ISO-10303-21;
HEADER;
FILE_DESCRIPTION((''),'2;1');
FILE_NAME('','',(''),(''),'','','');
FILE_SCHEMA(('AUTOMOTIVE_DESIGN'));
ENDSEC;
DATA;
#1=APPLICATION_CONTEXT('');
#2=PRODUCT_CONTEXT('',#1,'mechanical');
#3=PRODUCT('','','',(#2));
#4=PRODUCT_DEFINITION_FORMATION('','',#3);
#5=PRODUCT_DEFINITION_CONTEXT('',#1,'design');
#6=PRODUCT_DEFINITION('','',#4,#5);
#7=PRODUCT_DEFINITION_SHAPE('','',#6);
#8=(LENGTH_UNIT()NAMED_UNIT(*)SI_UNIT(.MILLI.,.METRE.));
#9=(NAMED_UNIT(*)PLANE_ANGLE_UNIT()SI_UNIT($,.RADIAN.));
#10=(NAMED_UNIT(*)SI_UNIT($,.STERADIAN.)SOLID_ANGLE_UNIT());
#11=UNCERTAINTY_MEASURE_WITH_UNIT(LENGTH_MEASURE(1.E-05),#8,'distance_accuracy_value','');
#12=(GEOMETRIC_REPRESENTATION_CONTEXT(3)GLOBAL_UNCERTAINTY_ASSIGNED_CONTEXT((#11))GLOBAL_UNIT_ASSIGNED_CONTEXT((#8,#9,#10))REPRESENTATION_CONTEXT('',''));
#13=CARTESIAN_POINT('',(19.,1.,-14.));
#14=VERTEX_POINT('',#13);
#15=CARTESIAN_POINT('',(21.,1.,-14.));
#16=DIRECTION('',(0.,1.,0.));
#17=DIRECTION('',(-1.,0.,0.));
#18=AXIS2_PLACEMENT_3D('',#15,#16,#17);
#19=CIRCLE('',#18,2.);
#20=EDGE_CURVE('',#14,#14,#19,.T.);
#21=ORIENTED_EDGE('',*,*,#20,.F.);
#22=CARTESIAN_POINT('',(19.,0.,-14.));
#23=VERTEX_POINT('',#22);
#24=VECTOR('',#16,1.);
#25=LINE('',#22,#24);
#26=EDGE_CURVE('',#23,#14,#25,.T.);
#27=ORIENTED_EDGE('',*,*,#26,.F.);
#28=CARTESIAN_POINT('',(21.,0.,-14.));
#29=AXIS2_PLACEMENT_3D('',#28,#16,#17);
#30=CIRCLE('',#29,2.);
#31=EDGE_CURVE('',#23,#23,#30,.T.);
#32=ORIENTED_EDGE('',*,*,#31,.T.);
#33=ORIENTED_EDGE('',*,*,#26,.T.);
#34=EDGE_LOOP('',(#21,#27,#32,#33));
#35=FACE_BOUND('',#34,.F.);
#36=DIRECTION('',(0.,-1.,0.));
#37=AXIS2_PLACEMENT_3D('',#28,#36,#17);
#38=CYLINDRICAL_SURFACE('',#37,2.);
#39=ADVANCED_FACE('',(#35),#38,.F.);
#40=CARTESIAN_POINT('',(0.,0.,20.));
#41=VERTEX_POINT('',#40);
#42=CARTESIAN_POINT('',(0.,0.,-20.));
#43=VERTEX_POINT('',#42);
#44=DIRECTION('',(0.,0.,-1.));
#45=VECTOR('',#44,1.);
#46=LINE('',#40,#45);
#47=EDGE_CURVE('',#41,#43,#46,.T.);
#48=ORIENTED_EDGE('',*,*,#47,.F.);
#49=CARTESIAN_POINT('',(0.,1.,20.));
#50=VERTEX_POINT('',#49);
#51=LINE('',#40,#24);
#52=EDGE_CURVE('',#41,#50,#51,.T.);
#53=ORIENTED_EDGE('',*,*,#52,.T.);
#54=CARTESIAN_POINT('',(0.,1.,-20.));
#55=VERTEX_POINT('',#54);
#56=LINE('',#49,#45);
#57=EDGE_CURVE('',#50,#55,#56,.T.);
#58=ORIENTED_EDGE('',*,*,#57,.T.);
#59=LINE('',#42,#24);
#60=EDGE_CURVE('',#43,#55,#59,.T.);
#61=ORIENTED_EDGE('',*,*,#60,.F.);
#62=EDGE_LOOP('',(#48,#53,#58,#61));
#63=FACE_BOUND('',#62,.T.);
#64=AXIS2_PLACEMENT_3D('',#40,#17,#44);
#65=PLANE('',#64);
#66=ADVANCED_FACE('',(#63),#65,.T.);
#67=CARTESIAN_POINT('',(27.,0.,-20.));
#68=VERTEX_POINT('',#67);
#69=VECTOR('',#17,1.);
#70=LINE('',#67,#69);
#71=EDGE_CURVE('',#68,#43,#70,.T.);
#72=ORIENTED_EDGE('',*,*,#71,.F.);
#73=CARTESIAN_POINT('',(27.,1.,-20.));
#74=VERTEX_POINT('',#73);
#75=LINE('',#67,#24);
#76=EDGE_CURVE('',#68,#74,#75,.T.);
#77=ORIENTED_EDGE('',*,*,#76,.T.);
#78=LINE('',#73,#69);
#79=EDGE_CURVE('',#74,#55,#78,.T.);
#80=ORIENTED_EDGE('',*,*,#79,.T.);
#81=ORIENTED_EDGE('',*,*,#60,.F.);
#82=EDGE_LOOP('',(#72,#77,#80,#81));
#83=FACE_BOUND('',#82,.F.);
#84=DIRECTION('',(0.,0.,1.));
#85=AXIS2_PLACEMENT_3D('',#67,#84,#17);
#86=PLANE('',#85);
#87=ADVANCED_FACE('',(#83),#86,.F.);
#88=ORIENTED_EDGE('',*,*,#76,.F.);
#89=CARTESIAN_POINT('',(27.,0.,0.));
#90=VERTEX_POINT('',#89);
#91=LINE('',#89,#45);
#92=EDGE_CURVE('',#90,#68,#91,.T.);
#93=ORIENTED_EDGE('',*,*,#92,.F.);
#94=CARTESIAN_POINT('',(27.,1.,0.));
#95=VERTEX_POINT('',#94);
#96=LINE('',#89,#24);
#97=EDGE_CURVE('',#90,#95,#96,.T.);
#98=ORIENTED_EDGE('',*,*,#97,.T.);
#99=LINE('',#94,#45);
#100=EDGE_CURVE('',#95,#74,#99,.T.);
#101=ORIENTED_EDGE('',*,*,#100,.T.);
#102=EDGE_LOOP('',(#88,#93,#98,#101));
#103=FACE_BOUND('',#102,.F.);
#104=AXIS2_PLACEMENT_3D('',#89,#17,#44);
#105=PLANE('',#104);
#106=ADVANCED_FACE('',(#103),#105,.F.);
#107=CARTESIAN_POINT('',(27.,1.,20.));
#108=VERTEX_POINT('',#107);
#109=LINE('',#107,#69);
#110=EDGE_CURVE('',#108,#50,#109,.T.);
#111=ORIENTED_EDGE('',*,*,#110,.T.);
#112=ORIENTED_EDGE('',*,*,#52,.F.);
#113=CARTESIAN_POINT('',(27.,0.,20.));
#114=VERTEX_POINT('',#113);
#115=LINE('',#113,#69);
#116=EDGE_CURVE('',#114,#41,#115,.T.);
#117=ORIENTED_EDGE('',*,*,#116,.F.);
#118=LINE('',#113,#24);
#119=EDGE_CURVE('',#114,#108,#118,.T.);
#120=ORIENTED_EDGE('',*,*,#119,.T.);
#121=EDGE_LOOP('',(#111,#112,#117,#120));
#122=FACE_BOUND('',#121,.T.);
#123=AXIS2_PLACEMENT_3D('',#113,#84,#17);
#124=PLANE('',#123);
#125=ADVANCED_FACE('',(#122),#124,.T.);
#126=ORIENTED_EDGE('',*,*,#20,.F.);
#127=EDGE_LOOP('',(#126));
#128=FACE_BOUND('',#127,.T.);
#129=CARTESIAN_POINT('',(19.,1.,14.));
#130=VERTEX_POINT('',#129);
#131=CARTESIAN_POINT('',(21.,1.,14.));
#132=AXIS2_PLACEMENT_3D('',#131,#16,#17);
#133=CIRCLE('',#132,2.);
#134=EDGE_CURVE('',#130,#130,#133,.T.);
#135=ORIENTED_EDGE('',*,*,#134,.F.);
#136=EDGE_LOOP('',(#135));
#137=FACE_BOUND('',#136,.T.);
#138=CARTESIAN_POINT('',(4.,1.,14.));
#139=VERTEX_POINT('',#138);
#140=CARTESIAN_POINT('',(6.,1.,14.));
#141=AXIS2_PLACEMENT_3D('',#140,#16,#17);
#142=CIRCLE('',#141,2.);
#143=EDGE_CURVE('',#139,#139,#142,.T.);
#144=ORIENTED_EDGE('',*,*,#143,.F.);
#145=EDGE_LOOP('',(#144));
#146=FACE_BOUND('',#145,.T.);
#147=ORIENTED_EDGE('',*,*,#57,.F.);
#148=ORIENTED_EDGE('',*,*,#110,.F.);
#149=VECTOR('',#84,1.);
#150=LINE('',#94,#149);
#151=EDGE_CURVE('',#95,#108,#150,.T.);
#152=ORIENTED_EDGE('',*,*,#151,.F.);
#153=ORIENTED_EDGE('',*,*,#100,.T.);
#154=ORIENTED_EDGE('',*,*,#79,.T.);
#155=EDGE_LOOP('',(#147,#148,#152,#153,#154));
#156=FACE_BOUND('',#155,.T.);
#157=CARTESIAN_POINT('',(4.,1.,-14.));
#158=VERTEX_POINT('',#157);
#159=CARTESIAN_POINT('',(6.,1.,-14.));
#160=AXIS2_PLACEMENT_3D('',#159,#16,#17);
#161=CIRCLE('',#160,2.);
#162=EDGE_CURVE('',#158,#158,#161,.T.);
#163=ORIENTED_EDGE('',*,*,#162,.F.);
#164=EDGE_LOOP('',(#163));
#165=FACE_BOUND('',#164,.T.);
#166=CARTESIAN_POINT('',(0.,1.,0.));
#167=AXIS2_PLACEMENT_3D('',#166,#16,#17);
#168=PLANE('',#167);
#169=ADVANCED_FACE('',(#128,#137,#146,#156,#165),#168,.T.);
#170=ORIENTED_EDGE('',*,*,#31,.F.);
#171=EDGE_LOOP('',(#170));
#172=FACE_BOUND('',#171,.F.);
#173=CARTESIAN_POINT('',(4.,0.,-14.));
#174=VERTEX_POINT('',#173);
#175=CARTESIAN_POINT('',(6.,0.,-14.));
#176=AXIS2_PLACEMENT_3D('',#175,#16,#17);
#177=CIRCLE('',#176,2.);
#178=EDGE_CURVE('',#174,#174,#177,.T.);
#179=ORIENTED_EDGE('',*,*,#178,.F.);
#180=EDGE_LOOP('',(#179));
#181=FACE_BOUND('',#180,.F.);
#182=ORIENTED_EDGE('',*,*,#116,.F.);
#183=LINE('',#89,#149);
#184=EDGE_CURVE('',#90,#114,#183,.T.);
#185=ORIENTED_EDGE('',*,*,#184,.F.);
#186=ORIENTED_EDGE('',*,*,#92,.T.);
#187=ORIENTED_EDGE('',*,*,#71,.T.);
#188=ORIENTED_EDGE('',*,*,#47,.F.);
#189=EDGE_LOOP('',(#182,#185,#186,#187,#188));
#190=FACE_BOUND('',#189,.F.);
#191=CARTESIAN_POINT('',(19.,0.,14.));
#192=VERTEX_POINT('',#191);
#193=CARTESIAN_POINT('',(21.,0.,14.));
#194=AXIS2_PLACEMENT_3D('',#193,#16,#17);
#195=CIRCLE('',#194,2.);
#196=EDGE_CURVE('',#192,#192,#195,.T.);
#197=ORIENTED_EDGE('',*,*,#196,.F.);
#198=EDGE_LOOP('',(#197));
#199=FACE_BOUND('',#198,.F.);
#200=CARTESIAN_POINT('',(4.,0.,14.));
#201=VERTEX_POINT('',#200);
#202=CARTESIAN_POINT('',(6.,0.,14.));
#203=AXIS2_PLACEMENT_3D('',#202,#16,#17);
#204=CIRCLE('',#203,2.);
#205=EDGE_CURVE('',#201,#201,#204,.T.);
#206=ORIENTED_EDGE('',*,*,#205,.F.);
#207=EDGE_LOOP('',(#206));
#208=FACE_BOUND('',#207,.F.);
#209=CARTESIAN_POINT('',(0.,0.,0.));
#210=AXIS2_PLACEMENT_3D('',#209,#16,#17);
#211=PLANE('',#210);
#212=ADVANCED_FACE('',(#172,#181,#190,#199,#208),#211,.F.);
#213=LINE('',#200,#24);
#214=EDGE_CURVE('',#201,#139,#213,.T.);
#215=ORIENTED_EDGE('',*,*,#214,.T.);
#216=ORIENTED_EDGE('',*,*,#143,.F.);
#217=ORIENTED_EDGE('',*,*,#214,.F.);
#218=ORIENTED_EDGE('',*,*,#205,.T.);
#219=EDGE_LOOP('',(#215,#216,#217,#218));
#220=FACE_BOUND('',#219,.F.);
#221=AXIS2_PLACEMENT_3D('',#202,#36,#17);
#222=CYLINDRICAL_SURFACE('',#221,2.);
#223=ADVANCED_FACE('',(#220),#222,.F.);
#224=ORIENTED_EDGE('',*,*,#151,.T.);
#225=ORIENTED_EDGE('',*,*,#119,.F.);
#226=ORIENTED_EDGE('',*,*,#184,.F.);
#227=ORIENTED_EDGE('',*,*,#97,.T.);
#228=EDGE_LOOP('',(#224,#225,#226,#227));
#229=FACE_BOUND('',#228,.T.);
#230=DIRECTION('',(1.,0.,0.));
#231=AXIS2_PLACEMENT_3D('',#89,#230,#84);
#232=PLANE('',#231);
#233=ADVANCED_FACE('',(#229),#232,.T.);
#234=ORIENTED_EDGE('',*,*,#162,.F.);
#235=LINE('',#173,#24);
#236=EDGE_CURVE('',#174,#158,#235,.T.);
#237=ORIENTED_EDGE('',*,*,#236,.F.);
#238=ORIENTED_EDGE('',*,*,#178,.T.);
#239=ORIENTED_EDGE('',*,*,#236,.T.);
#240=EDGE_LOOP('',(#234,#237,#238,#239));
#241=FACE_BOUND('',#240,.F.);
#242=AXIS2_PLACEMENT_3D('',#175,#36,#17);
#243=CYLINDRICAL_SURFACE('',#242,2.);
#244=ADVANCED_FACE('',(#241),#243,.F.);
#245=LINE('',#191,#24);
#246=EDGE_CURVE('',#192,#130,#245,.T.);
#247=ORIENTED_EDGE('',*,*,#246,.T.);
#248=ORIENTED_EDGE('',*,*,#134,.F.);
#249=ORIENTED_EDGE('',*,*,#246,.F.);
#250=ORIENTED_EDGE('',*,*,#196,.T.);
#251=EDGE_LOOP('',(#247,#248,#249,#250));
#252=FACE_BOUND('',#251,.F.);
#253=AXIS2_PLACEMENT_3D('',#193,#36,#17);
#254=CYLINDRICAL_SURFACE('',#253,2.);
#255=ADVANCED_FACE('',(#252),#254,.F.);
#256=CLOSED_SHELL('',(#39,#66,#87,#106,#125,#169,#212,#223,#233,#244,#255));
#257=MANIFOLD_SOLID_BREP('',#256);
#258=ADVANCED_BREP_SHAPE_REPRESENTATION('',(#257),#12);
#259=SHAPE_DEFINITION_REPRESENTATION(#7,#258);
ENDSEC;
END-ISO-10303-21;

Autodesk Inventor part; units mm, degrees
ref_plane "YZ Plane" through (0, 0, 0) normal (1, 0, 0) x (0, 1, 0)
ref_plane "XZ Plane" through (0, 0, 0) normal (0, 1, 0) x (-1, 0, 0)
ref_plane "XY Plane" through (0, 0, 0) normal (0, 0, 1) x (1, 0, 0)
sketch "Sketch1" plane through (0, 0, 0) normal (0, 1, 0) x (-1, 0, 0)
  line L0 (-27, 20) -> (0, 20)
  line L1 (0, 20) -> (0, 0) construction
  line L2 (0, 0) -> (-27, 0) construction
  line L3 (-27, 0) -> (-27, 20)
  line L4 (-37.8717, 14) -> (4.6091, 14) construction
  circle A0 centre (-6, 14) radius 2
  circle A1 centre (-21, 14) radius 2
  line L5 (-27, -20) -> (0, -20)
  line L6 (0, -20) -> (0, 0) construction
  line L7 (-27, 0) -> (-27, -20)
  line L8 (-37.8717, -14) -> (4.6091, -14) construction
  circle A2 centre (-6, -14) radius 2
  circle A3 centre (-21, -14) radius 2
  line L9 (0, 20) -> (0, -20)
  dimension "d1" = 20
  dimension "d2" = 6
  dimension "d3" = 4
  dimension "d4" = 6
  dimension "d5" = 21
  dimension "d7" = 6
extrude "Plate1" add sketch "Sketch1" along normal blind 1
equation "\"BendRadius\" = Thickness"
equation "\"BendReliefWidth\" = Thickness"
equation "\"BendReliefDepth\" = 0.5 * Thickness"
equation "\"CornerReliefSize\" = 4 * Thickness"
equation "\"MinimumRemnant\" = 2 * Thickness"
equation "\"TransitionRadius\" = BendRadius"
equation "\"JacobiRadiusSize\" = BendRadius"
equation "\"GapSize\" = Thickness"
equation "\"d6\" = BendRadius"
equation "\"Thickness\" = 1"
properties part number "BracketHalf" material "Steel, Galvanized"
